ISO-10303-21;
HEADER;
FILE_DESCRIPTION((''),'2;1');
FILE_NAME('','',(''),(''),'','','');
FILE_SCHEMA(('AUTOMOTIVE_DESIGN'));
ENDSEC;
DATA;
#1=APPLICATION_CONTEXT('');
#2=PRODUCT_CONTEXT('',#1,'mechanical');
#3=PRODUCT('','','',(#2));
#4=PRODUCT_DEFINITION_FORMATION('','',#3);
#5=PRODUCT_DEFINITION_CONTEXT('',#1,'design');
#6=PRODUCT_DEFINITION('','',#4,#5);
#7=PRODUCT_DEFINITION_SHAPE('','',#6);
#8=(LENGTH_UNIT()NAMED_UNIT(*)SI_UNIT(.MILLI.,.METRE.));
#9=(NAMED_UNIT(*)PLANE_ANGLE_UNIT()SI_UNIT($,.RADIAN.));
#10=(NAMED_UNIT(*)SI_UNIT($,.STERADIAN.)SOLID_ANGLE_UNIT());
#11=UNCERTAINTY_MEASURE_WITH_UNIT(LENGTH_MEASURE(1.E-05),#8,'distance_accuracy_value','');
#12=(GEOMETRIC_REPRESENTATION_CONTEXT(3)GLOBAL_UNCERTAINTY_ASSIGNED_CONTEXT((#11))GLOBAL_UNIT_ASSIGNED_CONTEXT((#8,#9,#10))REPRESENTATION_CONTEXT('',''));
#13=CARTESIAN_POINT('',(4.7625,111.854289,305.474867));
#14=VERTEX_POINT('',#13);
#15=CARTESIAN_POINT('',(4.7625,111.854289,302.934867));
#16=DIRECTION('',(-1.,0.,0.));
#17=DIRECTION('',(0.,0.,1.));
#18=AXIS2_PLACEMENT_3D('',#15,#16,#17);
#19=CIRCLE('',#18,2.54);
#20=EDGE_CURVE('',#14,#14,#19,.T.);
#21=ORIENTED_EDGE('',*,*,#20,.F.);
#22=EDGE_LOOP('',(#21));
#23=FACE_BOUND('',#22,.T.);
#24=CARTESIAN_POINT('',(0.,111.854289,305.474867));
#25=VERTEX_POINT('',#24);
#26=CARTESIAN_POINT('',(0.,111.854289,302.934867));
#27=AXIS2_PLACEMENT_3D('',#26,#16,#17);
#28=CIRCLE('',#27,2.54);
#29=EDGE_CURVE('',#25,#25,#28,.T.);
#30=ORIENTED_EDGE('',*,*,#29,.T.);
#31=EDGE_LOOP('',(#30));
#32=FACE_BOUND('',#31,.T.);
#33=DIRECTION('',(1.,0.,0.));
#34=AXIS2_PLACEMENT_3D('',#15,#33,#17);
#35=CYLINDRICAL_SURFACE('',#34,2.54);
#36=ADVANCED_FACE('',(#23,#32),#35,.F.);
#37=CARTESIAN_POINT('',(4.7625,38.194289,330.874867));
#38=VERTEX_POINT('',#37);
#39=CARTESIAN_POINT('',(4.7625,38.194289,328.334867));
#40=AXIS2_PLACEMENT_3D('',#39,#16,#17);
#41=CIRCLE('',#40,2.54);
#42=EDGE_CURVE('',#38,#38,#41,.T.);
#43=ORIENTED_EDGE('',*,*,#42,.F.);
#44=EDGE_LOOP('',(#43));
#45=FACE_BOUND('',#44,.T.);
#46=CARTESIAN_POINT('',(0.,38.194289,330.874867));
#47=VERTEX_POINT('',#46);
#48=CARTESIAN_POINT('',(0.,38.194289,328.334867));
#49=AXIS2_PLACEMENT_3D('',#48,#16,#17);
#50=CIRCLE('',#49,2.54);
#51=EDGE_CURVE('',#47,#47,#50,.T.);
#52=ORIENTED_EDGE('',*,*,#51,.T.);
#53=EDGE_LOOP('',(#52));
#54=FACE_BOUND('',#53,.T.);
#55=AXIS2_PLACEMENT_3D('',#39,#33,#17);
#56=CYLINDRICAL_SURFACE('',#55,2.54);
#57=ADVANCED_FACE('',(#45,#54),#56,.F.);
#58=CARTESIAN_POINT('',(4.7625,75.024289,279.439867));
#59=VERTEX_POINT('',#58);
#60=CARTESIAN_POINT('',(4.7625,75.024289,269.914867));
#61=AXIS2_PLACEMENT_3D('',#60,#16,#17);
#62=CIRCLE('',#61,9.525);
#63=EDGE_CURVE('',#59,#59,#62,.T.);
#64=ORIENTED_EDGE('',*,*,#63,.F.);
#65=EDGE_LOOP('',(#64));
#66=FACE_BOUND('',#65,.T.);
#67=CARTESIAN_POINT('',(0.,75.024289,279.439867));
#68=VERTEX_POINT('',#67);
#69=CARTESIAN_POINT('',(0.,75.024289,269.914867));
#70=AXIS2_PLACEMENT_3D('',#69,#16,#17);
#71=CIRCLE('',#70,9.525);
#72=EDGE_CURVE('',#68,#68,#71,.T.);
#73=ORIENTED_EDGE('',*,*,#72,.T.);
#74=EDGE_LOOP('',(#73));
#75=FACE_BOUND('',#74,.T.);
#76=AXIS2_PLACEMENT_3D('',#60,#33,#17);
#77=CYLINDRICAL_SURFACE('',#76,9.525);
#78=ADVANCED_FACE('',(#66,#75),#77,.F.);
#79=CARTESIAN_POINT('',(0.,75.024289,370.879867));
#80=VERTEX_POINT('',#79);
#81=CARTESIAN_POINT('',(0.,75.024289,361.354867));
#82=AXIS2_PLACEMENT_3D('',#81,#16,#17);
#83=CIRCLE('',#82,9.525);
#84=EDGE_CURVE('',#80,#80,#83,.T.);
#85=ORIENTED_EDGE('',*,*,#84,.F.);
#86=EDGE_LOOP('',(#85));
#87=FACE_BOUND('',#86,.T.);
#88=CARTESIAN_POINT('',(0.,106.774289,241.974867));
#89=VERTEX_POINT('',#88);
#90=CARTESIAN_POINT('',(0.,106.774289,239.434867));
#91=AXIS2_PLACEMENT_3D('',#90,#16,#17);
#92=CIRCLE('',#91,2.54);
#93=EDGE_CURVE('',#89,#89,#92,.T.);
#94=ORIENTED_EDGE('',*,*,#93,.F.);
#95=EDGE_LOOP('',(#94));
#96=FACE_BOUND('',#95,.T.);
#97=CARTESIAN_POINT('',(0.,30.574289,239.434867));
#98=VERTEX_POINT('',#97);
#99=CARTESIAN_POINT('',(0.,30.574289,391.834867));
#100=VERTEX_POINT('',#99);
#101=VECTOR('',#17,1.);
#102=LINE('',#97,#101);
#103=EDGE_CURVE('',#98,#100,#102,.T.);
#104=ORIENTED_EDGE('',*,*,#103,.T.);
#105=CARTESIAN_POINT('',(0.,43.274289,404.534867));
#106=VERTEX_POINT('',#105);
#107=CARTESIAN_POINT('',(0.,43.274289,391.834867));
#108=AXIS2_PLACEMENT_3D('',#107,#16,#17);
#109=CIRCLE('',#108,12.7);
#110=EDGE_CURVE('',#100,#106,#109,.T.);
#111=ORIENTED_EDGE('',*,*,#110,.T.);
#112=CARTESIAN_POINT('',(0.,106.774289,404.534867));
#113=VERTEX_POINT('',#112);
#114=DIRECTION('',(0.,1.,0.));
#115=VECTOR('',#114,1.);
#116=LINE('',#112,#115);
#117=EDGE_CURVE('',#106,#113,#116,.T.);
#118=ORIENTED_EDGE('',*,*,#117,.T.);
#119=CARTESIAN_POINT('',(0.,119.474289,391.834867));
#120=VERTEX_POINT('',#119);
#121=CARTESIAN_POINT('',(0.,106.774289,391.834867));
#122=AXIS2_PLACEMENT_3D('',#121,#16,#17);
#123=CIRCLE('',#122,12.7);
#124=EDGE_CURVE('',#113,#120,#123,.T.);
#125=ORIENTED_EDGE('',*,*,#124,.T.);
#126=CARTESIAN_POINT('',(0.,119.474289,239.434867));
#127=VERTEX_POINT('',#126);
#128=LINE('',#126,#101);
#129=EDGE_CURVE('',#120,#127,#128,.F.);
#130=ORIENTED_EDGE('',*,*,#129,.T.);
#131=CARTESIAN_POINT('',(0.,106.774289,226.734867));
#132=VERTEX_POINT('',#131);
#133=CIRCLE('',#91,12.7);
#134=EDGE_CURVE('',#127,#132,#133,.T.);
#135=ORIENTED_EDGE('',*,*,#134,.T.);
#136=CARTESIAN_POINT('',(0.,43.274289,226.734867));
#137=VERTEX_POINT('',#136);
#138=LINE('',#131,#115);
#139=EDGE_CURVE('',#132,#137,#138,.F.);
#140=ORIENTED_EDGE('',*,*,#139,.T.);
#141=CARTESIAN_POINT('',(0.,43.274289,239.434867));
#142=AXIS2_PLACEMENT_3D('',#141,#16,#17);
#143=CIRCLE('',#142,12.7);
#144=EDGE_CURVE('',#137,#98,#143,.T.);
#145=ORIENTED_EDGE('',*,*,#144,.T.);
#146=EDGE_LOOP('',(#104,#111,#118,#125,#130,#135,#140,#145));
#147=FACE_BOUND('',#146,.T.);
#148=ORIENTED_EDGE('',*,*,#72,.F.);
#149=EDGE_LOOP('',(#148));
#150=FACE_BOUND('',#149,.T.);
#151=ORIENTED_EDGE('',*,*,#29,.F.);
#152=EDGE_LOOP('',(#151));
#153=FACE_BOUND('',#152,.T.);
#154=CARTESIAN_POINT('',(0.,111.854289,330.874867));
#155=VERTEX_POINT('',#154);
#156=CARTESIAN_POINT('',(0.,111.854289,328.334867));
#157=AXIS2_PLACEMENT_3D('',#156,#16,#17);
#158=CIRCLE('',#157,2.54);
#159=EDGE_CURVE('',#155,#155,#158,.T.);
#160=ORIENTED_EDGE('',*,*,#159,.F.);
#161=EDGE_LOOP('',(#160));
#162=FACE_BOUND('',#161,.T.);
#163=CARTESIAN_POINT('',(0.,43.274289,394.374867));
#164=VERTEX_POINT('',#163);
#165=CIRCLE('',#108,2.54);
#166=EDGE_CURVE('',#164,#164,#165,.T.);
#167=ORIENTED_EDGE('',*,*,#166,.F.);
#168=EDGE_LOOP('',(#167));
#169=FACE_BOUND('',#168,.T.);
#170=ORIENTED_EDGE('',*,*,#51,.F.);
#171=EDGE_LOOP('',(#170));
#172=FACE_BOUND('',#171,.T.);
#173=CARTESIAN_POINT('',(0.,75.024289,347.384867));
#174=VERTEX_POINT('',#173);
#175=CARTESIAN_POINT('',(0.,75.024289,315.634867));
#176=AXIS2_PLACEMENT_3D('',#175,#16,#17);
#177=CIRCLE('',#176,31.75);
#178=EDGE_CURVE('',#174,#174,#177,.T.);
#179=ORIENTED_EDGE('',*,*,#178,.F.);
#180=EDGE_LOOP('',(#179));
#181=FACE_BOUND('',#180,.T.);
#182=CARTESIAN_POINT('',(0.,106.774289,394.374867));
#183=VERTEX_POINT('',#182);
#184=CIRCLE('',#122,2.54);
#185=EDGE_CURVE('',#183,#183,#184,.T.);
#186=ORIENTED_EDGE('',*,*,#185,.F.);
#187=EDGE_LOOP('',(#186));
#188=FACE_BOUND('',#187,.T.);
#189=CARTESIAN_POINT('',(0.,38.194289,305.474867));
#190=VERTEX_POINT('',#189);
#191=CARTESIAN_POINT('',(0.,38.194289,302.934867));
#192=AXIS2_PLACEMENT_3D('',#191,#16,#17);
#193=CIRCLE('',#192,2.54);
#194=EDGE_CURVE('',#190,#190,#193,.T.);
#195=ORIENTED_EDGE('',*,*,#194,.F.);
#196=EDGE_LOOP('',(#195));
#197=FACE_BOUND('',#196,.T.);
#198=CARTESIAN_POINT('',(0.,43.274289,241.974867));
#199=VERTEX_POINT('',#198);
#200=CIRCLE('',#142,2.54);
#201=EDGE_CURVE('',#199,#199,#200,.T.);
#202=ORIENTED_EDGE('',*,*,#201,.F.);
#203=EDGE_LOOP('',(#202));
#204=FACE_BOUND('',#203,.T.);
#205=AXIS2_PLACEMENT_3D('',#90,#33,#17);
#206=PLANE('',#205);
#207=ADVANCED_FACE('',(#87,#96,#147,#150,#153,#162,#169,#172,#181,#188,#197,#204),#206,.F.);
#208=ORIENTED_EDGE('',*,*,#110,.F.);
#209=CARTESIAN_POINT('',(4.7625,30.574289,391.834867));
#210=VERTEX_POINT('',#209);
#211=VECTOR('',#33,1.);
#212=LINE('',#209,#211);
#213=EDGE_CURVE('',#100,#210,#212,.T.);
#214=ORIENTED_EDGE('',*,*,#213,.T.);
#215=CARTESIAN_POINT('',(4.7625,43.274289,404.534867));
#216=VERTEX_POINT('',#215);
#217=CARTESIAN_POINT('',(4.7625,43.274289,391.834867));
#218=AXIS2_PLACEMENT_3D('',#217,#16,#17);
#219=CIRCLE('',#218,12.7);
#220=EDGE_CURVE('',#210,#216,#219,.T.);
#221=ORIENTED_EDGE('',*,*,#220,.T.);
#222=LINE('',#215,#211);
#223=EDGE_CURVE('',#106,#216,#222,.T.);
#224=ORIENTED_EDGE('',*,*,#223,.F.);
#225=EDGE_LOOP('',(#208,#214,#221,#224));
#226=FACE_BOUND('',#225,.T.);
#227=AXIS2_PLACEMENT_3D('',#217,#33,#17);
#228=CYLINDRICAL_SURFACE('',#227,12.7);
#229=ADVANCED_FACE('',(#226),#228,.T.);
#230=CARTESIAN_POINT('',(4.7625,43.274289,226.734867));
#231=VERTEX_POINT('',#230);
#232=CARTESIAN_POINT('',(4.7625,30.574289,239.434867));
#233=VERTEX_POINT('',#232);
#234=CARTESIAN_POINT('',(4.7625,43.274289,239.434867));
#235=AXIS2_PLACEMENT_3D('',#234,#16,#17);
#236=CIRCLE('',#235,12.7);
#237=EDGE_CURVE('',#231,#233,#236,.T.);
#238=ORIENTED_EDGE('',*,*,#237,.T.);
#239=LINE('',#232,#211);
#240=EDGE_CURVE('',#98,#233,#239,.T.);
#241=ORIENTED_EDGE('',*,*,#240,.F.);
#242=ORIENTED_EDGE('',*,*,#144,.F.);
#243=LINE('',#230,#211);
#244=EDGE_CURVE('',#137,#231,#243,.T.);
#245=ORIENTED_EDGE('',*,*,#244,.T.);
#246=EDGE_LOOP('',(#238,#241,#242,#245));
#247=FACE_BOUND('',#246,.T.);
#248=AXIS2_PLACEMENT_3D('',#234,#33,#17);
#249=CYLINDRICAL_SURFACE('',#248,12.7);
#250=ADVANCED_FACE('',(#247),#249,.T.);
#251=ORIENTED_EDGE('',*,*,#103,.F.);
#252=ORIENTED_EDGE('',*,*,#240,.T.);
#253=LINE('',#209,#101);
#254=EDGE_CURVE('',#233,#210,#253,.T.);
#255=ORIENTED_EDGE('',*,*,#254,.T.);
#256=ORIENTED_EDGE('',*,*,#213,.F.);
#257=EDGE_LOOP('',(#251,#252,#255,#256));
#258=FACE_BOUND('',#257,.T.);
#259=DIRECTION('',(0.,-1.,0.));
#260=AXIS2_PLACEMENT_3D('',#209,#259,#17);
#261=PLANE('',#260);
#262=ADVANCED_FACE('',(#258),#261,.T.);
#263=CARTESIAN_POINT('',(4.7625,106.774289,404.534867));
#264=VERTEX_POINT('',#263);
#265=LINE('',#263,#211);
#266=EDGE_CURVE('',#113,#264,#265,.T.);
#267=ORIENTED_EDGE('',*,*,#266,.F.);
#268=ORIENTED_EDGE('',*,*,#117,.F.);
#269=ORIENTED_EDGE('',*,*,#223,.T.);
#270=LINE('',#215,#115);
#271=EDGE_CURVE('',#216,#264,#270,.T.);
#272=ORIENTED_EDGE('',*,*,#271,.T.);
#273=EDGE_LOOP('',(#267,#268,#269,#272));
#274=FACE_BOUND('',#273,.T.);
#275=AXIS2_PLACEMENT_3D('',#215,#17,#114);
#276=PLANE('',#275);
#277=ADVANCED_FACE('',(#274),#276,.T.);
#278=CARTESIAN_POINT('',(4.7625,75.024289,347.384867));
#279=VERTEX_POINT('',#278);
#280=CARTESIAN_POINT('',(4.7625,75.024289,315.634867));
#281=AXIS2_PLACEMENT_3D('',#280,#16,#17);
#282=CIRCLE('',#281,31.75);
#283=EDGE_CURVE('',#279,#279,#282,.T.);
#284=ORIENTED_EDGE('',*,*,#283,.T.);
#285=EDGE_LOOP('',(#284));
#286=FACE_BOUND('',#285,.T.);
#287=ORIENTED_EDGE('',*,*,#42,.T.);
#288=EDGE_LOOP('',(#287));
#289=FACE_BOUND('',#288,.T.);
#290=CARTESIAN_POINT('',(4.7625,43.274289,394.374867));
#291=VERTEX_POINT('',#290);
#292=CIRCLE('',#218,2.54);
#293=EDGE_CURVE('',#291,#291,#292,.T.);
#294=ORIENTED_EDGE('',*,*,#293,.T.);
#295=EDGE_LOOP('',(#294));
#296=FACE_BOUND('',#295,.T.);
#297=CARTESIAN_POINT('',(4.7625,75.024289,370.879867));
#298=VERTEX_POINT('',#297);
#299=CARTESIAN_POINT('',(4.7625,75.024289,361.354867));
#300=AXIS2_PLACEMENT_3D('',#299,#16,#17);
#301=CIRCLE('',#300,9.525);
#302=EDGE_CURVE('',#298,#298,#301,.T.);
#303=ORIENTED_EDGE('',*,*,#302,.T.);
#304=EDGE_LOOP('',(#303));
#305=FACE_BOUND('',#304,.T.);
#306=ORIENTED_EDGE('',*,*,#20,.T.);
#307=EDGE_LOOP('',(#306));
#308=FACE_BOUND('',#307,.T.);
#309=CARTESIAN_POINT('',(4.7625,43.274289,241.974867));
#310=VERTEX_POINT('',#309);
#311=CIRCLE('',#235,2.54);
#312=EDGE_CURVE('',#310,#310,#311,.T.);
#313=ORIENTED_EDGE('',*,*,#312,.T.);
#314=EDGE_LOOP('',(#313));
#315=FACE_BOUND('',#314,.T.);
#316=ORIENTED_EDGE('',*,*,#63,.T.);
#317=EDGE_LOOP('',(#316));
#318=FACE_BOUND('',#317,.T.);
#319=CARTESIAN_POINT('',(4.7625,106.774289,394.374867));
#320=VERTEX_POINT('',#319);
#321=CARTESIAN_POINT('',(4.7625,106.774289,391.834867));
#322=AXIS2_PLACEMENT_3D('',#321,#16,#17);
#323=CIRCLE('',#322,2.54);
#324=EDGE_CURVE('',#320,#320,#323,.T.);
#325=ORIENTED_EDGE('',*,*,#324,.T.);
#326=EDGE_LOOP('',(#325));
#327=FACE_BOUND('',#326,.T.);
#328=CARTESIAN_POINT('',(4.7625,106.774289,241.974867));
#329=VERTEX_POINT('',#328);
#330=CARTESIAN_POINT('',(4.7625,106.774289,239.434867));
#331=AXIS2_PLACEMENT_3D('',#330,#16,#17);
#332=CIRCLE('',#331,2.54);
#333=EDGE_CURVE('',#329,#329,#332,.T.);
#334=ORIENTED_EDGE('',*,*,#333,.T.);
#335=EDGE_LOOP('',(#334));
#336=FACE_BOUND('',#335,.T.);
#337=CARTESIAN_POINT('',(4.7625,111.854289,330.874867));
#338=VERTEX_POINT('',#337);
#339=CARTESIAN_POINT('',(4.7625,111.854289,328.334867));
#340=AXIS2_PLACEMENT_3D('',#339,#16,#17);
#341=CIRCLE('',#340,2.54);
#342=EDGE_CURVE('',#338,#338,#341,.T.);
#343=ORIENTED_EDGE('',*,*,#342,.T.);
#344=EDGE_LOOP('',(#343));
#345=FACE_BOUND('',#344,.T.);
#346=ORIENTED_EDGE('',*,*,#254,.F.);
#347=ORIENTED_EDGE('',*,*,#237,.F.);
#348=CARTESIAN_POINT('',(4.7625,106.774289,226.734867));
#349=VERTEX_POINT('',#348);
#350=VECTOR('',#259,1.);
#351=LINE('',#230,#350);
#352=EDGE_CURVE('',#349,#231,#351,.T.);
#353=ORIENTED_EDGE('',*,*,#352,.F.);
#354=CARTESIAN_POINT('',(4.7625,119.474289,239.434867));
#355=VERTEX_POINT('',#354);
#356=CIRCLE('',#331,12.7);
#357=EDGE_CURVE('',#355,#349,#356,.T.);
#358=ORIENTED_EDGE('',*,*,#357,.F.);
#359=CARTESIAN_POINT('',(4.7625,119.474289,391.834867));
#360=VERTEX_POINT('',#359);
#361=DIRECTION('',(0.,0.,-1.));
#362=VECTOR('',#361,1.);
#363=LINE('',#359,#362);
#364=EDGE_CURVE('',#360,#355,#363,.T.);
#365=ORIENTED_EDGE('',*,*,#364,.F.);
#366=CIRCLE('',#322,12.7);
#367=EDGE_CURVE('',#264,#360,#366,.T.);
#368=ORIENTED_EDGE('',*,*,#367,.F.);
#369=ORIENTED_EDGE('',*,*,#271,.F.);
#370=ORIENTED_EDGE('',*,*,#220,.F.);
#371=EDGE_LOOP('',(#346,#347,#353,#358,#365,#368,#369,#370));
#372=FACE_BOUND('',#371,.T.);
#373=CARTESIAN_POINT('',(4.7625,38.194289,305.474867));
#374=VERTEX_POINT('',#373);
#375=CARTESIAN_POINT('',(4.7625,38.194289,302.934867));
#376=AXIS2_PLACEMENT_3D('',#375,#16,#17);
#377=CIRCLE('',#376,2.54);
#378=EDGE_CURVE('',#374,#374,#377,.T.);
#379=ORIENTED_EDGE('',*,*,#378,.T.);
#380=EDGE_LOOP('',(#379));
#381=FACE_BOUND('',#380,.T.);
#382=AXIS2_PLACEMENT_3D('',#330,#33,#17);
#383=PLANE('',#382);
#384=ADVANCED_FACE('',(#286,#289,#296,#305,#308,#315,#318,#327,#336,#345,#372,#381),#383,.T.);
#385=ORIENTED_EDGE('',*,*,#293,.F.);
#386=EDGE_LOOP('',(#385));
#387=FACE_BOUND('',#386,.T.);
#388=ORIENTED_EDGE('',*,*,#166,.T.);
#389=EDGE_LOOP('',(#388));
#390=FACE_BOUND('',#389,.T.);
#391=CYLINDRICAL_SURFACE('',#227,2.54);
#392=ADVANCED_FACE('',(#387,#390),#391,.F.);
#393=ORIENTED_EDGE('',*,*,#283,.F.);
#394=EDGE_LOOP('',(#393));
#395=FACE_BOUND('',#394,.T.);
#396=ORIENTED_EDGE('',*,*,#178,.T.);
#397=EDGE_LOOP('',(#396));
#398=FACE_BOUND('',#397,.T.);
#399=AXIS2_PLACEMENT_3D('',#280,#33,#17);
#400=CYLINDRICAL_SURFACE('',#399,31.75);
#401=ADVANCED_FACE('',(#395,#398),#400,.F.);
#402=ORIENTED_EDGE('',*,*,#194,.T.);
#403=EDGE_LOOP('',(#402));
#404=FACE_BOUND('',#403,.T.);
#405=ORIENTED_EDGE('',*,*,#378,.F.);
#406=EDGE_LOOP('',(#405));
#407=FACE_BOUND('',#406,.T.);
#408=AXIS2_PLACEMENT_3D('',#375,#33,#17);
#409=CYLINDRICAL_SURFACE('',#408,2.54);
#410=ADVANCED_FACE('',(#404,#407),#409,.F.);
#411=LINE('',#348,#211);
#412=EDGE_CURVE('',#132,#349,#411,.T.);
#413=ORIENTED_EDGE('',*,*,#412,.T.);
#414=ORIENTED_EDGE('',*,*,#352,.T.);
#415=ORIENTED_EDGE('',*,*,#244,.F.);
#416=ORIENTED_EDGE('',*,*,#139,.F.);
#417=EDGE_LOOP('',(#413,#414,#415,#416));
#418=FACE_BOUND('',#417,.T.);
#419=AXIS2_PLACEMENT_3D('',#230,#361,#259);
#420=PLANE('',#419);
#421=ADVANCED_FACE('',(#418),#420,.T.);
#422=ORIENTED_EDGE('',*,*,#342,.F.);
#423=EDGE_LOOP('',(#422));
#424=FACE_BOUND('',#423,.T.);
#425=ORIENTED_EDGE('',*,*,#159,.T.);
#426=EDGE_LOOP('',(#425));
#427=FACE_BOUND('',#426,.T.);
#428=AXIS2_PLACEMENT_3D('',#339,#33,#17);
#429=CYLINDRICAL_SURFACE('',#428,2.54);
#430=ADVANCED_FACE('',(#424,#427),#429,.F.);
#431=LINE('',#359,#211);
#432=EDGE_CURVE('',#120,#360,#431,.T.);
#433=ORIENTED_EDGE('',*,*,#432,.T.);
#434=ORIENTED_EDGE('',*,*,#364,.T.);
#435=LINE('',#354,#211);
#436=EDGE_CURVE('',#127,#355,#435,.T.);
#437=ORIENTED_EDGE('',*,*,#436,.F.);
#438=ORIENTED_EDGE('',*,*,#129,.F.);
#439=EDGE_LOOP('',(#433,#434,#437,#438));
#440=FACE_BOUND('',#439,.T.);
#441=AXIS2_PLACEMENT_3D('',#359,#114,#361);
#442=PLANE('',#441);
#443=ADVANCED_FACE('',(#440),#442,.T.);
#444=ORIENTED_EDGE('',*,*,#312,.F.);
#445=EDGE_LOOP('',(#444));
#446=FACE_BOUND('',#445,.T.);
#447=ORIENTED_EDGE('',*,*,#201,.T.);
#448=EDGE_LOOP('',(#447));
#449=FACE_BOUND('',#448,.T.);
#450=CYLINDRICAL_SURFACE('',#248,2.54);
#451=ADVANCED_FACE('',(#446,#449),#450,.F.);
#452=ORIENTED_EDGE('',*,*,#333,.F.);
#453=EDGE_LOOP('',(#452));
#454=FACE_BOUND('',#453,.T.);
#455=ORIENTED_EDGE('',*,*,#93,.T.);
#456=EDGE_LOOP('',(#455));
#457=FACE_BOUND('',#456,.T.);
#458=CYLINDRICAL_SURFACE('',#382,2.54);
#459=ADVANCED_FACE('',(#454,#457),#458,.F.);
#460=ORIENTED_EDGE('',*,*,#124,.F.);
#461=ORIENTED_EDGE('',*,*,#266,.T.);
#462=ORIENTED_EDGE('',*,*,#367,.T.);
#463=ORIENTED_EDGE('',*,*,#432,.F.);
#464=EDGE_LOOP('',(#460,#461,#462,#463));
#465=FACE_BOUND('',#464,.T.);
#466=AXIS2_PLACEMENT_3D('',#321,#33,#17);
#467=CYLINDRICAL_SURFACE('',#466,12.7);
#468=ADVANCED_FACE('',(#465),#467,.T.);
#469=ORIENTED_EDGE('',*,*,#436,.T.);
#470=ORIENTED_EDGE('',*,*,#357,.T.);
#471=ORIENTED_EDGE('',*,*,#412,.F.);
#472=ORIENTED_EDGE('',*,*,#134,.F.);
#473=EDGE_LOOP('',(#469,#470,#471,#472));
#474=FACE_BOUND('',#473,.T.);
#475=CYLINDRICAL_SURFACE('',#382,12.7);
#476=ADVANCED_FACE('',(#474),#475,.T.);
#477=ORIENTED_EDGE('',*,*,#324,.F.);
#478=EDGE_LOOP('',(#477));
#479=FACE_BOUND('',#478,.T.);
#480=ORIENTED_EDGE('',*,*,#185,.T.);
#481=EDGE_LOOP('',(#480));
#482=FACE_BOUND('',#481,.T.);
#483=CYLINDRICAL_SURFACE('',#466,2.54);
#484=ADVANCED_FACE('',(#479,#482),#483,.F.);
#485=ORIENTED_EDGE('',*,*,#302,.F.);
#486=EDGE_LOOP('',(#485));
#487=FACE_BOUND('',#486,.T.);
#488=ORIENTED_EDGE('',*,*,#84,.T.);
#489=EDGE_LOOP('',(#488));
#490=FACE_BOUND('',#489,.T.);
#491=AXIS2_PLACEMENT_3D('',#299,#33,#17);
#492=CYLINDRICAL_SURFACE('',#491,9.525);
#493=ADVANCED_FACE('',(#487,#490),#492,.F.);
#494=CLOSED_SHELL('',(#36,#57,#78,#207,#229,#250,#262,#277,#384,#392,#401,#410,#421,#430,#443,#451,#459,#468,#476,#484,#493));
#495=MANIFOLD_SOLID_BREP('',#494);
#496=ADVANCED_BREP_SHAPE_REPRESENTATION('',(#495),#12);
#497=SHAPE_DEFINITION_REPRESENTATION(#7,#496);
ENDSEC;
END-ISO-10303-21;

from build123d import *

# Parameters (mm, degrees)
SKETCH1_R           = 2.54
SKETCH1_R_2         = 31.75
SKETCH1_R_3         = 9.525
BOSS_EXTRUDE1_DEPTH = 4.7625


with BuildPart() as part:
    # Sketch1 → Boss-Extrude1 (new body)
    with BuildSketch(Plane(origin=(0, 0, 0), x_dir=(0, 0, -1), z_dir=(1, 0, 0))):
        with BuildLine():
            Line((226.734866781, 43.274288567), (226.734866781, 106.774288567))
            ThreePointArc((226.734866781, 106.774288567), (230.45461066, 115.754544688), (239.434866781, 119.474288567))
            Line((239.434866781, 119.474288567), (391.834866781, 119.474288567))
            ThreePointArc((391.834866781, 119.474288567), (400.815122902, 115.754544688), (404.534866781, 106.774288567))
            Line((404.534866781, 106.774288567), (404.534866781, 43.274288567))
            ThreePointArc((404.534866781, 43.274288567), (400.815122902, 34.294032445), (391.834866781, 30.574288567))
            Line((391.834866781, 30.574288567), (239.434866781, 30.574288567))
            ThreePointArc((239.434866781, 30.574288567), (230.45461066, 34.294032445), (226.734866781, 43.274288567))
        make_face()
        with Locations(Location((302.934866781, 111.854288567, 0), (0, 0, 180))):
            Circle(SKETCH1_R, mode=Mode.SUBTRACT)
        with Locations(Location((328.334866781, 111.854288567, 0), (0, 0, 180))):
            Circle(SKETCH1_R, mode=Mode.SUBTRACT)
        with Locations(Location((302.934866781, 38.194288567, 0), (0, 0, 180))):
            Circle(SKETCH1_R, mode=Mode.SUBTRACT)
        with Locations(Location((328.334866781, 38.194288567, 0), (0, 0, 180))):
            Circle(SKETCH1_R, mode=Mode.SUBTRACT)
        with Locations(Location((239.434866781, 43.274288567, 0), (0, 0, 180))):
            Circle(SKETCH1_R, mode=Mode.SUBTRACT)
        with Locations(Location((391.834866781, 43.274288567, 0), (0, 0, 180))):
            Circle(SKETCH1_R, mode=Mode.SUBTRACT)
        with Locations(Location((315.634866781, 75.024288567, 0), (0, 0, 180))):
            Circle(SKETCH1_R_2, mode=Mode.SUBTRACT)
        with Locations(Location((239.434866781, 106.774288567, 0), (0, 0, 180))):
            Circle(SKETCH1_R, mode=Mode.SUBTRACT)
        with Locations(Location((391.834866781, 106.774288567, 0), (0, 0, 180))):
            Circle(SKETCH1_R, mode=Mode.SUBTRACT)
        with Locations(Location((269.914866781, 75.024288567, 0), (0, 0, 180))):
            Circle(SKETCH1_R_3, mode=Mode.SUBTRACT)
        with Locations(Location((361.354866781, 75.024288567, 0), (0, 0, 180))):
            Circle(SKETCH1_R_3, mode=Mode.SUBTRACT)
    extrude(amount=BOSS_EXTRUDE1_DEPTH)


with BuildPart() as part_1:
    # Body-Move/Copy1: moved
    add(part.part.moved(Location((0, 0, 631.269733563))))


solid = part_1.part
